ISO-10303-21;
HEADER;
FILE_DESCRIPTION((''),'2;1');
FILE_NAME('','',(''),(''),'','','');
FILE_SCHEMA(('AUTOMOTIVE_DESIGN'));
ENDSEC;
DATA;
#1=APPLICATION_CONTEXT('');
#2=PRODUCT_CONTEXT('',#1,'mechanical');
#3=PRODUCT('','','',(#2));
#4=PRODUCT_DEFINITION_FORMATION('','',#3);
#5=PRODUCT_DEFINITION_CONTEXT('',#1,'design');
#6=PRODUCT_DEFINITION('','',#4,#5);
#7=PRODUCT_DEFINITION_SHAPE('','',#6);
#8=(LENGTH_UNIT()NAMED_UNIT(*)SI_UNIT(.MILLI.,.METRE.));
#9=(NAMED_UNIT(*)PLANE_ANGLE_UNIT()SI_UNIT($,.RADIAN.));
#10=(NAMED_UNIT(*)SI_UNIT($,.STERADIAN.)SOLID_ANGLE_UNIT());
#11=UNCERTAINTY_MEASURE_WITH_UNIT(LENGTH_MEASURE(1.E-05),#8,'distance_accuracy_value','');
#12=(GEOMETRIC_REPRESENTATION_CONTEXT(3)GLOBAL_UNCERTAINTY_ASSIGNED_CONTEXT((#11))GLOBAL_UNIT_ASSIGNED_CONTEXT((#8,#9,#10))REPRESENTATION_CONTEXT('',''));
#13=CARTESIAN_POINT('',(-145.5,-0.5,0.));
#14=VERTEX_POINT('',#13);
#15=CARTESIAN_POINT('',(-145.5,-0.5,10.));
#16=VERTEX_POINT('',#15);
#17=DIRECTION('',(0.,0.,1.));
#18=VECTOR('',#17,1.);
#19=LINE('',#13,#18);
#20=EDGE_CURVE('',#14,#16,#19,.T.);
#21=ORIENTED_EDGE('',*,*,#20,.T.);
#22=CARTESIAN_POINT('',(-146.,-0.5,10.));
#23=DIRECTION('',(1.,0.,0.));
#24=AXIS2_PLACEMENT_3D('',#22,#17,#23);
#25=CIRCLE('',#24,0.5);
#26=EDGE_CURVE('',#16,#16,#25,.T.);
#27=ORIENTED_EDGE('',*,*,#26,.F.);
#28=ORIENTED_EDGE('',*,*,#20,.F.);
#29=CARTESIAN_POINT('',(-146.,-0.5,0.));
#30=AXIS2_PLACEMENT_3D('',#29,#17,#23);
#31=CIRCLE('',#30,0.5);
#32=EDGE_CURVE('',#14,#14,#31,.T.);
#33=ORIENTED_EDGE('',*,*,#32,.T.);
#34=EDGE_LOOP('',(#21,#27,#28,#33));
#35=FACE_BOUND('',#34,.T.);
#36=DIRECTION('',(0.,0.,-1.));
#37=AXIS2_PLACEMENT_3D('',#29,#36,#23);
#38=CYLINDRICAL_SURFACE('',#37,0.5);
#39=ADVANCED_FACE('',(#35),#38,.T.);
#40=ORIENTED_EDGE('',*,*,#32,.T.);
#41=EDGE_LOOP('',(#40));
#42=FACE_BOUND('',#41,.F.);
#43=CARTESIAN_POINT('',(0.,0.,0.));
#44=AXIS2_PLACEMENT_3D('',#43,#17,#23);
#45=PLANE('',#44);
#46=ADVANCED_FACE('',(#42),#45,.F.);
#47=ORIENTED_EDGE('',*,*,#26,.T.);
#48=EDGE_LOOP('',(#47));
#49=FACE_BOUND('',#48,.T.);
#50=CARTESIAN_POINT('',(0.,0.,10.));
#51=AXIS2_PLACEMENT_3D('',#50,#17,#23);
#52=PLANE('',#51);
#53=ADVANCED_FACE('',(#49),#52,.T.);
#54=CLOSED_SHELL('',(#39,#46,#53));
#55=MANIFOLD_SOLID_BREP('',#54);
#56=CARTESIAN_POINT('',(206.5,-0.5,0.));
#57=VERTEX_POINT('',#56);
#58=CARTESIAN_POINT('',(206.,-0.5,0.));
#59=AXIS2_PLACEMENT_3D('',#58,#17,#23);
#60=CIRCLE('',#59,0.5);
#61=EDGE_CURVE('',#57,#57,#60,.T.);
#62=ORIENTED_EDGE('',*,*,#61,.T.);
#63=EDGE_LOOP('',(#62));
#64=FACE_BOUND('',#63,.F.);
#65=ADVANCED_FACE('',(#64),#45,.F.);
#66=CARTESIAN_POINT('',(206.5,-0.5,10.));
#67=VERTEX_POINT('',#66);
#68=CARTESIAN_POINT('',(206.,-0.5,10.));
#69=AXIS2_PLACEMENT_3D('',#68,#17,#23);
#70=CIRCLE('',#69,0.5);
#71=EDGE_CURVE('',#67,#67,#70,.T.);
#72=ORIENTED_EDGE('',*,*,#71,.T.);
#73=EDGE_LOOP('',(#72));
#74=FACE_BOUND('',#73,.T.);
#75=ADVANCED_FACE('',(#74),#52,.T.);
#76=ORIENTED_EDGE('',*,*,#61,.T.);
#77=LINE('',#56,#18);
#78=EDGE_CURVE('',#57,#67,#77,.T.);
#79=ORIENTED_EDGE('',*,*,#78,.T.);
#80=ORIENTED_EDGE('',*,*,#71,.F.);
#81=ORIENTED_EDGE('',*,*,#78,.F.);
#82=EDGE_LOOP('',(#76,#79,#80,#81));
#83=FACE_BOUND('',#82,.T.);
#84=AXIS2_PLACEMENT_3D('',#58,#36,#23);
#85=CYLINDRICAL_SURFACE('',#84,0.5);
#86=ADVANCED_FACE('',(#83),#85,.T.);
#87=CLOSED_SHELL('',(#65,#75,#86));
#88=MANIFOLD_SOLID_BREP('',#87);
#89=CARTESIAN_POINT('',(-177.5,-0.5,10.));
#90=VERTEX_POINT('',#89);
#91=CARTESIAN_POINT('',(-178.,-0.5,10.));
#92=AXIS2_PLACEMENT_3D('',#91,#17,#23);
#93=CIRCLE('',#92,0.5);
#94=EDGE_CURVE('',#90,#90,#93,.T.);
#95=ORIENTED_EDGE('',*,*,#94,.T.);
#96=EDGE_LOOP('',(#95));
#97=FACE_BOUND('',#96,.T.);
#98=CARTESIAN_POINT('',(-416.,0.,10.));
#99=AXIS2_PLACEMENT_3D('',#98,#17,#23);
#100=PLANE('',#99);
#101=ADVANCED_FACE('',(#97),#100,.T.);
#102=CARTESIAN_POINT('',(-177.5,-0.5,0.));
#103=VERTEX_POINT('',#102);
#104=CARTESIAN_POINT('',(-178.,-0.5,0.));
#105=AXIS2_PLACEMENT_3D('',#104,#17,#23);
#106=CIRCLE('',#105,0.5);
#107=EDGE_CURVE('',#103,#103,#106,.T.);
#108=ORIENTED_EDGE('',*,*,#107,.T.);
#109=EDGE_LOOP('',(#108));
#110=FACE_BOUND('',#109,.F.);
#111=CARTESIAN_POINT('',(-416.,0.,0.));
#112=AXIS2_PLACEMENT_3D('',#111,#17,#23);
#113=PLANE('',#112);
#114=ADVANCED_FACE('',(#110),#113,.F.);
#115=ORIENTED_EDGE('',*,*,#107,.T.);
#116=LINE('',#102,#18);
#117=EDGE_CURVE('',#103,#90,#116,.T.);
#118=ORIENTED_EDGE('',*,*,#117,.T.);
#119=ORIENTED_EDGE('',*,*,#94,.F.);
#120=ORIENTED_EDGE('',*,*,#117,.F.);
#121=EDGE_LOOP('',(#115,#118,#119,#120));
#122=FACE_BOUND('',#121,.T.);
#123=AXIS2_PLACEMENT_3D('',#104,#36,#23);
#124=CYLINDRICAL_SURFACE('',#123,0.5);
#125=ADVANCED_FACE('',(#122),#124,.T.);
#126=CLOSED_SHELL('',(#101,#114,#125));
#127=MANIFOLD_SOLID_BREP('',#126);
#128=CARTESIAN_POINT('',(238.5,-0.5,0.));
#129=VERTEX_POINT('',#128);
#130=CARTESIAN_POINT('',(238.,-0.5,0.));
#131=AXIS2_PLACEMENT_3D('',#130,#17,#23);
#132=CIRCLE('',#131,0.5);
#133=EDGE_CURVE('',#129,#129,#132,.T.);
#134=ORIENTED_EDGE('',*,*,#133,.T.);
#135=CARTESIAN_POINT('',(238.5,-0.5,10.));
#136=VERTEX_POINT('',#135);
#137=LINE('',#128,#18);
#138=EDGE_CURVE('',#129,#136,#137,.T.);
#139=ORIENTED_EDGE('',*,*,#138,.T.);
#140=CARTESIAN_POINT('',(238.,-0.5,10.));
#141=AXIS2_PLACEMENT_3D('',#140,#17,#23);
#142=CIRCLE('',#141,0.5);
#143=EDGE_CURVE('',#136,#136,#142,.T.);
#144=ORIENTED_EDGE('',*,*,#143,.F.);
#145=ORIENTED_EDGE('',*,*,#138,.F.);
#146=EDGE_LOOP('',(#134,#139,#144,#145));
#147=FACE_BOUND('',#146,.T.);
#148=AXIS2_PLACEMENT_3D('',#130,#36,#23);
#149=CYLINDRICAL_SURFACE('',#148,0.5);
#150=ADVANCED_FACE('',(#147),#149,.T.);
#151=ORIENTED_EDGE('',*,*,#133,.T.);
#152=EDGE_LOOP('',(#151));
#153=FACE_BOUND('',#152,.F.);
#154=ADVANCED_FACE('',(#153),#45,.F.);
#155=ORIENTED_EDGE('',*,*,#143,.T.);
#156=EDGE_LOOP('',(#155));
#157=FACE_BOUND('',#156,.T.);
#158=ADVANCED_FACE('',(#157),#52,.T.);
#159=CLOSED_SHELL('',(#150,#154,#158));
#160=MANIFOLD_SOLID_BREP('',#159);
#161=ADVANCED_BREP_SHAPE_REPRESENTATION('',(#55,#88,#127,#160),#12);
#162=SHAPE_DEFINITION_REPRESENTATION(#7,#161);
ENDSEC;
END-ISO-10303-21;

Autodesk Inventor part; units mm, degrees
ref_plane "YZ Plane" through (0, 0, 0) normal (1, 0, 0) x (0, 1, 0)
ref_plane "XZ Plane" through (0, 0, 0) normal (0, 1, 0) x (-1, 0, 0)
ref_plane "XY Plane" through (0, 0, 0) normal (0, 0, 1) x (1, 0, 0)
sketch "Sketch1" plane through (0, 0, 0) normal (0, 0, 1) x (1, 0, 0)
  line L0 (-300, -9) -> (300, -9)
  line L1 (300, -9) -> (300, 9)
  line L2 (300, 9) -> (-300, 9)
  line L3 (-300, 9) -> (-300, -9)
  line L4 (-300, -9) -> (300, 9) construction
  line L5 (300, -9) -> (-300, 9) construction
  point P0 (0, 0)
  dimension "d0" = 600
  dimension "d1" = 18
sketch "Sketch2" plane through (0, 0, 0) normal (0, 0, 1) x (1, 0, 0)
  circle A0 centre (238, -0.5) radius 0.5
  line L0 (300, 9) -> (-300, 9) projected
  line L1 (-300, -9) -> (300, -9) projected
  line L2 (0, -12.6) -> (0, 12.6) projected
  line L3 (300, -9) -> (300, 9) projected
  point P0 (0, 0)
  dimension "d3" = 9.5
  dimension "d4" = 1
  dimension "d26" = 62
extrude "Extrusion1" add sketch "Sketch2" along normal blind 10 contours A0
pattern_linear "Minifix Array" count 2 spacing 416 along (-1, 0, 0) of "Extrusion1"
sketch "Sketch3" plane through (0, 0, 0) normal (0, 0, 1) x (1, 0, 0)
  circle A0 centre (206, -0.5) radius 0.5
  circle A1 centre (238, -0.5) radius 0.5 projected
  point P0 (0, 0)
  dimension "d11" = 32
extrude "Extrusion2" add sketch "Sketch3" along normal blind 10 separate body contours A0
pattern_of_one "Left Dowel Array" bodies 2
sketch "Sketch4" plane through (0, 0, 0) normal (0, 0, 1) x (1, 0, 0)
  line L0 (-300, 9) -> (-300, -9) projected
  circle A0 centre (-146, -0.5) radius 0.5
  circle A1 centre (238, -0.5) radius 0.5 projected
  line L1 (300, -9) -> (300, 9) projected
  point P0 (0, 0)
  dimension "d17" = 62
  dimension "d28" = 446
extrude "Extrusion3" add sketch "Sketch4" along normal blind 10 separate body contours A0
pattern_of_one "Right Dowel Array" bodies 3
equation "\"d3\" = Y_Coord"
equation "\"d26\" = X_Coord"
equation "\"d9\" = Step"
equation "\"d16\" = Step"
equation "\"d28\" = PlacingWithByStep + X_Coord - PlacingStep"
equation "\"d23\" = Step"
equation "\"d0\" = ContactPatchWidth"
equation "\"d1\" = ContactPatchHeight"
equation "\"ContactPatchWidth\" = 600"
equation "\"ContactPatchHeight\" = 18"
equation "\"PlacingStep\" = 32"
equation "\"PlacingWithByStep\" = 416"
equation "\"X_Coord\" = 62"
equation "\"Step\" = 416"
equation "\"Y_Coord\" = 9.5"
equation "\"MaxDistBetweenByStep\" = 192"
properties part number "Minifix&Dowel Joint 11200"
